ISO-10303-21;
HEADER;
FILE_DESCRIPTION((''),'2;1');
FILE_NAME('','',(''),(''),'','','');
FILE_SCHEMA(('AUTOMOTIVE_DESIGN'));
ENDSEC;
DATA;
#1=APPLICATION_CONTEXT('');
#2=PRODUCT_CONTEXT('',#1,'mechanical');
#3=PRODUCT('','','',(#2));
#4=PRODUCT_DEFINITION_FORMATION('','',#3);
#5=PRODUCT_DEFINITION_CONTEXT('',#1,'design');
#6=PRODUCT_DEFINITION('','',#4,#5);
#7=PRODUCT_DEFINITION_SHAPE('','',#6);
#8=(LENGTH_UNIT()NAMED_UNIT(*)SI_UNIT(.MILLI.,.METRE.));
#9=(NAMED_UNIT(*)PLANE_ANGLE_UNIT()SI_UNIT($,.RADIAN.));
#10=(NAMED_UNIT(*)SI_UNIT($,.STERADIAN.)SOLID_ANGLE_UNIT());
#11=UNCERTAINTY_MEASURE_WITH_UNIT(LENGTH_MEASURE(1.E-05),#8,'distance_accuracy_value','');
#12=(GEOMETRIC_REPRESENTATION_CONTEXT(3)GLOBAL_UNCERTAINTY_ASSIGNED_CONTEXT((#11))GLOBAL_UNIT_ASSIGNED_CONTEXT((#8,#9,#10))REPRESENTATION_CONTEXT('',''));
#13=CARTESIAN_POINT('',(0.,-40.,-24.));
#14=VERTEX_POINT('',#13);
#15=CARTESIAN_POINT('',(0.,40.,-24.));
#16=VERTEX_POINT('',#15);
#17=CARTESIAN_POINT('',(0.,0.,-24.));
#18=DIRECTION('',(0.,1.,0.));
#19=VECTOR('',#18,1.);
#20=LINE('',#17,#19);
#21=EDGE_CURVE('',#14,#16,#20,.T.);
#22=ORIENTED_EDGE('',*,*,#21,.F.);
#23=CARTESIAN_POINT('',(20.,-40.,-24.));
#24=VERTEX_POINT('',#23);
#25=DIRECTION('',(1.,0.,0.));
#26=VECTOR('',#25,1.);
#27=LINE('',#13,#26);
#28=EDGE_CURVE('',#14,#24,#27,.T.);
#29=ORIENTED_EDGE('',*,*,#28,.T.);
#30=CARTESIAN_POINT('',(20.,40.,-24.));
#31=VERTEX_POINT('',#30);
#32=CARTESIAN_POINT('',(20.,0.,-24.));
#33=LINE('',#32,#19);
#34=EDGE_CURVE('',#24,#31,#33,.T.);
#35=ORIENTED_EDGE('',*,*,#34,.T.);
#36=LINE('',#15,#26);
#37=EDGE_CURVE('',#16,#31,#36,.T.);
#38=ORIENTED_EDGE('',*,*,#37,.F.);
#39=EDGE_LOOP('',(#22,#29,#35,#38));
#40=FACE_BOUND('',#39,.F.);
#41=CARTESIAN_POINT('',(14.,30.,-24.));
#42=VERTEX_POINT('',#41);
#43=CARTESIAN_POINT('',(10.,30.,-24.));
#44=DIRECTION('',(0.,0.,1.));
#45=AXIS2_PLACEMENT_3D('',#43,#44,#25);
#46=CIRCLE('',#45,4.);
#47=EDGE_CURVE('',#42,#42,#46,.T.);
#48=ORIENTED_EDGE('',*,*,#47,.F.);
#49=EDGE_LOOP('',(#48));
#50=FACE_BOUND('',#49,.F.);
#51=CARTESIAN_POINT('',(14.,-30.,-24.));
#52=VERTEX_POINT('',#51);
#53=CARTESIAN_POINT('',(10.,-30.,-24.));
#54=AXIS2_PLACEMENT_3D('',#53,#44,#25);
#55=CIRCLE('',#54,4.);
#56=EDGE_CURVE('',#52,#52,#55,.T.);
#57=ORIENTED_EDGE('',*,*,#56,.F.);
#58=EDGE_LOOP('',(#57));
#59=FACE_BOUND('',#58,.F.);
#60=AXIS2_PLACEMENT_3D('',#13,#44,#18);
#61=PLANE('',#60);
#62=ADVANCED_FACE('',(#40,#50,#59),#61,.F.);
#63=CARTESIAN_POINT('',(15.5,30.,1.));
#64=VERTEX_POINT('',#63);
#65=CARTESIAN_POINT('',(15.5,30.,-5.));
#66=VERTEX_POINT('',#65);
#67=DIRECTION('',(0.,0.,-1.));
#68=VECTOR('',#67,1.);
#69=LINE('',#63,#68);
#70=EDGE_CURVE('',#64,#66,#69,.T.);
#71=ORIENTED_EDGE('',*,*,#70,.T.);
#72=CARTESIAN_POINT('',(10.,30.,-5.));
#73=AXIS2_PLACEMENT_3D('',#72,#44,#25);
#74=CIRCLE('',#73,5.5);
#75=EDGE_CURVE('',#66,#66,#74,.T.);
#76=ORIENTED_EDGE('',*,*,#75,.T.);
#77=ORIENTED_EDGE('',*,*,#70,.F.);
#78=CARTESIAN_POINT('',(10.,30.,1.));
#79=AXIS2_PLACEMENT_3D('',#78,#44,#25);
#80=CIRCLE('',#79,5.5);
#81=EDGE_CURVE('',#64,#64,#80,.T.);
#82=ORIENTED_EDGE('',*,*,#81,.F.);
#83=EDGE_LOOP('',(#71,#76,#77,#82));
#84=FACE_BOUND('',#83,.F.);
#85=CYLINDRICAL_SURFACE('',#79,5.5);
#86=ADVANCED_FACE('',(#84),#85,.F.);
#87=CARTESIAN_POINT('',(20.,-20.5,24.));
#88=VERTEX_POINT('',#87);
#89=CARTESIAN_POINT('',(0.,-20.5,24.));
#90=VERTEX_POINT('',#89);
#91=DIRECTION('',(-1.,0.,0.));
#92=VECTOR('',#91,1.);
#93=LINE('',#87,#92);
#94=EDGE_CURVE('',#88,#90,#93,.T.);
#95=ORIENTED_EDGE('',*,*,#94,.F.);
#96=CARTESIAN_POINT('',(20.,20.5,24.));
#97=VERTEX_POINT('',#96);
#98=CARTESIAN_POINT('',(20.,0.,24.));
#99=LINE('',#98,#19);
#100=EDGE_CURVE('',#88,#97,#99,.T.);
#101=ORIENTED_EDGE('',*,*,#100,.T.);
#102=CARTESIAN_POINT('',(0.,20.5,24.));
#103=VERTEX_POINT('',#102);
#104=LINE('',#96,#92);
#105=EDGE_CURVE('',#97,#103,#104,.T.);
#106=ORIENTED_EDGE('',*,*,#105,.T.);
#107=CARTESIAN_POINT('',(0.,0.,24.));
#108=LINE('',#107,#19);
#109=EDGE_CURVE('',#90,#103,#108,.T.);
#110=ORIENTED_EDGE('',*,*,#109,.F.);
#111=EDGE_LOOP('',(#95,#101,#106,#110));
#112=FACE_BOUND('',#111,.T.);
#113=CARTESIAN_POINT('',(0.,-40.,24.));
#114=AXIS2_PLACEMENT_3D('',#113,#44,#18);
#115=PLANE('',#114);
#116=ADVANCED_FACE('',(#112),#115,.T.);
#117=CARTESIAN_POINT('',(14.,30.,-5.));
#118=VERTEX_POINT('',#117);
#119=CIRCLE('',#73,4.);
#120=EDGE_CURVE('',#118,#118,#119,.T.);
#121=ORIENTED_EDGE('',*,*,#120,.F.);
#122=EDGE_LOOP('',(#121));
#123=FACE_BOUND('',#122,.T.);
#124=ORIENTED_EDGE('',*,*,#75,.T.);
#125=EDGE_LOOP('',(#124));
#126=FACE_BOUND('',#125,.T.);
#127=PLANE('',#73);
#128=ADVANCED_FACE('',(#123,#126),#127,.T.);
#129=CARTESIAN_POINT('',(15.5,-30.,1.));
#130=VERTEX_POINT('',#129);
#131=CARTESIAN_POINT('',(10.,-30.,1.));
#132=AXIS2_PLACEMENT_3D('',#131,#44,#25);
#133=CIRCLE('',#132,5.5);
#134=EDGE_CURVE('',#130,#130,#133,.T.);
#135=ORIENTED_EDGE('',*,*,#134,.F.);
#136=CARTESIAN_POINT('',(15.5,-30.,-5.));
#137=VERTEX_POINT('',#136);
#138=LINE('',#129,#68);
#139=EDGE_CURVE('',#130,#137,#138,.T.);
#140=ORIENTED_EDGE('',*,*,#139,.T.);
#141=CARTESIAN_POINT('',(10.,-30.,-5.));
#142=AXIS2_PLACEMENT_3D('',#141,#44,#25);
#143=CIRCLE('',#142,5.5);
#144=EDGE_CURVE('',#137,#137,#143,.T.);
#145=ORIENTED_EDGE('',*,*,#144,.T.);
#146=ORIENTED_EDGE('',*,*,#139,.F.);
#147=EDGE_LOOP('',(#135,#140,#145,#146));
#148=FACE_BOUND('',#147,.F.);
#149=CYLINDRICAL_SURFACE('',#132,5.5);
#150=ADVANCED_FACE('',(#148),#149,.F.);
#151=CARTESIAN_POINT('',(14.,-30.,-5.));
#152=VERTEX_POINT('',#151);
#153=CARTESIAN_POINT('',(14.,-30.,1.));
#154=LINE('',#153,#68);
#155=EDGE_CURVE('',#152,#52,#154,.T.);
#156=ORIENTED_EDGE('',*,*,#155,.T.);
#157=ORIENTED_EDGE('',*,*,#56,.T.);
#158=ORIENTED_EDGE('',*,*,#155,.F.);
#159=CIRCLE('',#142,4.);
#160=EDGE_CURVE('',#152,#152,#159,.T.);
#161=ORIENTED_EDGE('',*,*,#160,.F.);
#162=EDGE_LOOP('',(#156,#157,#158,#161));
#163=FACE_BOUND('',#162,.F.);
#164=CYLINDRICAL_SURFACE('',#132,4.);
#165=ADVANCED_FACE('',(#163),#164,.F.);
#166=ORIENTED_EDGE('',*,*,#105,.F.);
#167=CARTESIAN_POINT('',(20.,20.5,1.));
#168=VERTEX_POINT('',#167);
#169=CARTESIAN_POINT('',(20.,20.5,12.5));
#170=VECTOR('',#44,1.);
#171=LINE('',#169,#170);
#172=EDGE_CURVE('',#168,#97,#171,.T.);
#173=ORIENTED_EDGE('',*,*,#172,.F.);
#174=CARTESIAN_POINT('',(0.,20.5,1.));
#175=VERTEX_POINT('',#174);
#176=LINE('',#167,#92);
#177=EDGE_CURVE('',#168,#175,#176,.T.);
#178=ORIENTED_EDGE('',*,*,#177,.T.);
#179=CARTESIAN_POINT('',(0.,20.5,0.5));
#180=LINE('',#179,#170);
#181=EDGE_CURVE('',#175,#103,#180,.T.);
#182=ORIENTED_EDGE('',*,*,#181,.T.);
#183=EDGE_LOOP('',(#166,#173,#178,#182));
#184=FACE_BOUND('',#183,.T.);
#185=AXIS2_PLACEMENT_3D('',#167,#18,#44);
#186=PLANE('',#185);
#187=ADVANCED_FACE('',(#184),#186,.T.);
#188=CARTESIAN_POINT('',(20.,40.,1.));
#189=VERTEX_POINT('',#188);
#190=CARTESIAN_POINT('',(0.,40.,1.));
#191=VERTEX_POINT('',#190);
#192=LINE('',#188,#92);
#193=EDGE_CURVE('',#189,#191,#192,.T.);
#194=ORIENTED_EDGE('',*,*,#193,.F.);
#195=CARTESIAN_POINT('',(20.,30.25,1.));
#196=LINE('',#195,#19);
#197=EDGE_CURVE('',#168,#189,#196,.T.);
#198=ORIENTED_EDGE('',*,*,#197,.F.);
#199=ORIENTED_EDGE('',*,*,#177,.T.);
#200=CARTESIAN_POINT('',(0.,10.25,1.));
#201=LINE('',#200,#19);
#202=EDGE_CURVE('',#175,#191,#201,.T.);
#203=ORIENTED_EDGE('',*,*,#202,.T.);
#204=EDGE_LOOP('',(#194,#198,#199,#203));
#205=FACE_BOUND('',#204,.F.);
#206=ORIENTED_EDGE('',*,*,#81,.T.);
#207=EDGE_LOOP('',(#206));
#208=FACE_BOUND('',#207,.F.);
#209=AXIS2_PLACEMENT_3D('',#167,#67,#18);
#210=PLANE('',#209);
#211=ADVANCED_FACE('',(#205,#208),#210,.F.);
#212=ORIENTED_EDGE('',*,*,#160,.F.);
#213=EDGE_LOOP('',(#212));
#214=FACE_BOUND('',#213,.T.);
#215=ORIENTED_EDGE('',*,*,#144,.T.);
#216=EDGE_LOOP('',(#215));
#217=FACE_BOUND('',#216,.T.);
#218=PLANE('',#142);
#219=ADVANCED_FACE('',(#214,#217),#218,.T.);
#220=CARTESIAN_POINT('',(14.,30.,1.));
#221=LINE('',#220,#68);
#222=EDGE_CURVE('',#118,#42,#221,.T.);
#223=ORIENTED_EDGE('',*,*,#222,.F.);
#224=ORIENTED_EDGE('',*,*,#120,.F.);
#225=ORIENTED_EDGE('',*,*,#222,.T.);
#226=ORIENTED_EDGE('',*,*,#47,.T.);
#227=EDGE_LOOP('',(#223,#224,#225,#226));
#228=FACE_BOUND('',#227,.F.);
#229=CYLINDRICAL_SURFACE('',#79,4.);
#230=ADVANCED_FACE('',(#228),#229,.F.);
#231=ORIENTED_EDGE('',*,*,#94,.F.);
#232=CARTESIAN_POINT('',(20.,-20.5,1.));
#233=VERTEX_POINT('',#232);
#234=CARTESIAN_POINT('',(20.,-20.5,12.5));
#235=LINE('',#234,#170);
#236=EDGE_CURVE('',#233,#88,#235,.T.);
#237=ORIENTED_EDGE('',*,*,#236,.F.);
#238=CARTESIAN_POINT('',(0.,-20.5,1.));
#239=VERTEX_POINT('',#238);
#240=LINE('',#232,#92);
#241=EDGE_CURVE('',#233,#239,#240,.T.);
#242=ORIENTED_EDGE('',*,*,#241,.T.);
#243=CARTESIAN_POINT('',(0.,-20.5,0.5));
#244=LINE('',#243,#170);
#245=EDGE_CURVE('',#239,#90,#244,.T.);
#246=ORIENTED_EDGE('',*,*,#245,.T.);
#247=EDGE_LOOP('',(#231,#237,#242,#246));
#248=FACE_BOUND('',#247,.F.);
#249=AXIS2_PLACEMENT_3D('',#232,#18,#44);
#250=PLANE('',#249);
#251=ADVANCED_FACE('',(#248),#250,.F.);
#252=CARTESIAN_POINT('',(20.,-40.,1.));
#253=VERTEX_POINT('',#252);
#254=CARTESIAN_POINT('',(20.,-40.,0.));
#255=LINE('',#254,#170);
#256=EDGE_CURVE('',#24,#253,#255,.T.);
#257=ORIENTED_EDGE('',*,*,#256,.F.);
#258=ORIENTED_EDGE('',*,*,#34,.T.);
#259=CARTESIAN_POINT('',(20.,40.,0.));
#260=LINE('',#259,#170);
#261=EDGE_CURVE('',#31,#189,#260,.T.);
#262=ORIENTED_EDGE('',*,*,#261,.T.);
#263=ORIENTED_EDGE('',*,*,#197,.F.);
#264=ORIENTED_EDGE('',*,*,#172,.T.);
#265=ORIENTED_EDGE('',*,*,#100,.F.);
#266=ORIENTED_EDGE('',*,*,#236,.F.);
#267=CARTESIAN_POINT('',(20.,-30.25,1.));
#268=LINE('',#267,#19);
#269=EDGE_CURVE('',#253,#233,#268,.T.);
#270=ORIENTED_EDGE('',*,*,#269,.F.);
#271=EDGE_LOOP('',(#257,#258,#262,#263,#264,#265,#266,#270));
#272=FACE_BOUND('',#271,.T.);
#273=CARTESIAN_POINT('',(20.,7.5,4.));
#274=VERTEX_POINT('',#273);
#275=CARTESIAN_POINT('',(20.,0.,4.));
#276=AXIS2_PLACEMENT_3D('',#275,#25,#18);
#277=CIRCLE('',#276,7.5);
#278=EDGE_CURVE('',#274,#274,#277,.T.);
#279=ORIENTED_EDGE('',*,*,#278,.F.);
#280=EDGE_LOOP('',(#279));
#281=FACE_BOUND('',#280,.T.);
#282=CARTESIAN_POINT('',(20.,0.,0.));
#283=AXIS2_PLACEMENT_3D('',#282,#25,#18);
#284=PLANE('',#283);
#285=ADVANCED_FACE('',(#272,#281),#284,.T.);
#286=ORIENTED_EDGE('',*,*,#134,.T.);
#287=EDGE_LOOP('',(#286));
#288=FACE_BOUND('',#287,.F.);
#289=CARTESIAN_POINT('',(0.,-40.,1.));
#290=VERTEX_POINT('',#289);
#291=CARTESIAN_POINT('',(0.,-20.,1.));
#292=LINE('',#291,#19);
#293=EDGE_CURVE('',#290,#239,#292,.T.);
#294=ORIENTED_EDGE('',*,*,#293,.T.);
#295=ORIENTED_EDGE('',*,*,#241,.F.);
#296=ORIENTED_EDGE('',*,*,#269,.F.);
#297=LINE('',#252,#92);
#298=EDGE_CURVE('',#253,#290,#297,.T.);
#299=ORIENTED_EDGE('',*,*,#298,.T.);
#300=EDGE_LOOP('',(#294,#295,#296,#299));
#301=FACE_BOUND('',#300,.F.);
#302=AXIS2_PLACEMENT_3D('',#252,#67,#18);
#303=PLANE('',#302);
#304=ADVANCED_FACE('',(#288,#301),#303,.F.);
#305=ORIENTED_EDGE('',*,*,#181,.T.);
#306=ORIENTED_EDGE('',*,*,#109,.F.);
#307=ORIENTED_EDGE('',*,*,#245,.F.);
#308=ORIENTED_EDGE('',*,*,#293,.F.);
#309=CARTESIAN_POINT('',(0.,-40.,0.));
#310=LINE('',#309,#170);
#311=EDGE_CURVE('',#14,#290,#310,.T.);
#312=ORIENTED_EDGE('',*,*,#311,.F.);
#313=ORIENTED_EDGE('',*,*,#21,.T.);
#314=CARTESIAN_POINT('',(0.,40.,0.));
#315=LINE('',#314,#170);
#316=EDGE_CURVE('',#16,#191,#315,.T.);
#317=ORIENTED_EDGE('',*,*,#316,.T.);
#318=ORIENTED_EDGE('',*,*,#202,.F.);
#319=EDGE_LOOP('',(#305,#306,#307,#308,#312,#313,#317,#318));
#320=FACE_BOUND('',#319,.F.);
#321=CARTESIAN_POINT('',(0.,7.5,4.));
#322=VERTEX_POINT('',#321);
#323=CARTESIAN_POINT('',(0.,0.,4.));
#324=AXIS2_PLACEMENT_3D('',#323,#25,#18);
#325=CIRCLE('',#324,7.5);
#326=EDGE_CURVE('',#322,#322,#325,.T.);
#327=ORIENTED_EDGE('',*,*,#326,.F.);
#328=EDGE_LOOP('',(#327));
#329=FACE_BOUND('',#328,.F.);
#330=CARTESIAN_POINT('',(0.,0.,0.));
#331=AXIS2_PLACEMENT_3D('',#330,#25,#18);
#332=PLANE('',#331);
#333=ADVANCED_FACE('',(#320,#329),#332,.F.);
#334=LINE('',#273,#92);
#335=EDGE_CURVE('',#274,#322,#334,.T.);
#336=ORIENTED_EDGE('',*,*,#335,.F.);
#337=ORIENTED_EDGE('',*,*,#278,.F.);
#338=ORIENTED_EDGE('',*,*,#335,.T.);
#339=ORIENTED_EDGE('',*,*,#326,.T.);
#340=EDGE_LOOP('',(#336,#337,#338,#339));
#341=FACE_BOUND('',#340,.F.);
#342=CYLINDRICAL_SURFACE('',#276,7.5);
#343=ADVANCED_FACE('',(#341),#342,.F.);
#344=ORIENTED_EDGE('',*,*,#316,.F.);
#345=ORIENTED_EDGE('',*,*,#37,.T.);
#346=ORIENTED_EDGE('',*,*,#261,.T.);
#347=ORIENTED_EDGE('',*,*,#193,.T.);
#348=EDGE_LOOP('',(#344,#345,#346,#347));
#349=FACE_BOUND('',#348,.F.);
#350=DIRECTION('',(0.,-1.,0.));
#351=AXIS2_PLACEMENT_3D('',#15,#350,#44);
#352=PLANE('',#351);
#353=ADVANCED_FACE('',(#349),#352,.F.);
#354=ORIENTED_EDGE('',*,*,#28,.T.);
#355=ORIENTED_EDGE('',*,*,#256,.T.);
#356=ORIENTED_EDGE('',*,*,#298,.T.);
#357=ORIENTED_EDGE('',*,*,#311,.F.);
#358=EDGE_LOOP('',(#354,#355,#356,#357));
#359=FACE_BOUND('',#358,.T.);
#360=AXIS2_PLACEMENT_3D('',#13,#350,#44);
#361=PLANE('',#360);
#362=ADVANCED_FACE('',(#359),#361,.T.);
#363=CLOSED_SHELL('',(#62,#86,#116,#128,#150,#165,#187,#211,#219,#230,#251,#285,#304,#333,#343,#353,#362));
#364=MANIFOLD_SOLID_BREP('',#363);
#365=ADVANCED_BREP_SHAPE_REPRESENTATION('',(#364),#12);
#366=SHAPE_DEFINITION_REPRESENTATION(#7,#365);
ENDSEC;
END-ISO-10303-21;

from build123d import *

# Parameters (mm, degrees)
F0_W     = 80
F0_H     = 48
F1_DEPTH = 20
F2_R     = 7.5
F3_DEPTH = 20.001
F4_W     = 19.5
F4_H     = 23
F5_DEPTH = 20.001
F6_R     = 5.5
F6_R_2   = 4
F7_DEPTH = 6
F8_DEPTH = 25.001


with BuildPart() as f1:
    # F0 (on Right) → F1 (new body)
    with BuildSketch(Plane.YZ):
        Rectangle(F0_W, F0_H)
    extrude(amount=F1_DEPTH)

    # F2 (on face) → F3 (cut, through all)
    with BuildSketch(Plane.YZ.offset(20)):
        with Locations((0, 4)):
            Circle(F2_R)
    extrude(amount=-F3_DEPTH, mode=Mode.SUBTRACT)

    # F4 (on face) → F5 (cut, through all)
    with BuildSketch(Plane.YZ.offset(20)):
        with Locations((-30.25, 12.5)):
            Rectangle(F4_W, F4_H)
        with Locations((30.25, 12.5)):
            Rectangle(F4_W, F4_H)
    extrude(amount=-F5_DEPTH, mode=Mode.SUBTRACT)

    # F6 (on face) → F7 (cut)
    with BuildSketch(Plane.XY.offset(1)):
        with Locations((10, 30)):
            Circle(F6_R)
        with Locations((10, 30)):
            Circle(F6_R_2, mode=Mode.SUBTRACT)
        with Locations((10, -30)):
            Circle(F6_R)
        with Locations((10, -30)):
            Circle(F6_R_2, mode=Mode.SUBTRACT)
    extrude(amount=-F7_DEPTH, mode=Mode.SUBTRACT)

    # F8 (cut, through all): faces of the model
    f8_faces = [f1.faces().sort_by_distance(p)[0] for p in [
        (10, 30, 1),
        (10, -30, 1),
    ]]
    extrude(f8_faces, amount=-F8_DEPTH, mode=Mode.SUBTRACT)


solid = f1.part
